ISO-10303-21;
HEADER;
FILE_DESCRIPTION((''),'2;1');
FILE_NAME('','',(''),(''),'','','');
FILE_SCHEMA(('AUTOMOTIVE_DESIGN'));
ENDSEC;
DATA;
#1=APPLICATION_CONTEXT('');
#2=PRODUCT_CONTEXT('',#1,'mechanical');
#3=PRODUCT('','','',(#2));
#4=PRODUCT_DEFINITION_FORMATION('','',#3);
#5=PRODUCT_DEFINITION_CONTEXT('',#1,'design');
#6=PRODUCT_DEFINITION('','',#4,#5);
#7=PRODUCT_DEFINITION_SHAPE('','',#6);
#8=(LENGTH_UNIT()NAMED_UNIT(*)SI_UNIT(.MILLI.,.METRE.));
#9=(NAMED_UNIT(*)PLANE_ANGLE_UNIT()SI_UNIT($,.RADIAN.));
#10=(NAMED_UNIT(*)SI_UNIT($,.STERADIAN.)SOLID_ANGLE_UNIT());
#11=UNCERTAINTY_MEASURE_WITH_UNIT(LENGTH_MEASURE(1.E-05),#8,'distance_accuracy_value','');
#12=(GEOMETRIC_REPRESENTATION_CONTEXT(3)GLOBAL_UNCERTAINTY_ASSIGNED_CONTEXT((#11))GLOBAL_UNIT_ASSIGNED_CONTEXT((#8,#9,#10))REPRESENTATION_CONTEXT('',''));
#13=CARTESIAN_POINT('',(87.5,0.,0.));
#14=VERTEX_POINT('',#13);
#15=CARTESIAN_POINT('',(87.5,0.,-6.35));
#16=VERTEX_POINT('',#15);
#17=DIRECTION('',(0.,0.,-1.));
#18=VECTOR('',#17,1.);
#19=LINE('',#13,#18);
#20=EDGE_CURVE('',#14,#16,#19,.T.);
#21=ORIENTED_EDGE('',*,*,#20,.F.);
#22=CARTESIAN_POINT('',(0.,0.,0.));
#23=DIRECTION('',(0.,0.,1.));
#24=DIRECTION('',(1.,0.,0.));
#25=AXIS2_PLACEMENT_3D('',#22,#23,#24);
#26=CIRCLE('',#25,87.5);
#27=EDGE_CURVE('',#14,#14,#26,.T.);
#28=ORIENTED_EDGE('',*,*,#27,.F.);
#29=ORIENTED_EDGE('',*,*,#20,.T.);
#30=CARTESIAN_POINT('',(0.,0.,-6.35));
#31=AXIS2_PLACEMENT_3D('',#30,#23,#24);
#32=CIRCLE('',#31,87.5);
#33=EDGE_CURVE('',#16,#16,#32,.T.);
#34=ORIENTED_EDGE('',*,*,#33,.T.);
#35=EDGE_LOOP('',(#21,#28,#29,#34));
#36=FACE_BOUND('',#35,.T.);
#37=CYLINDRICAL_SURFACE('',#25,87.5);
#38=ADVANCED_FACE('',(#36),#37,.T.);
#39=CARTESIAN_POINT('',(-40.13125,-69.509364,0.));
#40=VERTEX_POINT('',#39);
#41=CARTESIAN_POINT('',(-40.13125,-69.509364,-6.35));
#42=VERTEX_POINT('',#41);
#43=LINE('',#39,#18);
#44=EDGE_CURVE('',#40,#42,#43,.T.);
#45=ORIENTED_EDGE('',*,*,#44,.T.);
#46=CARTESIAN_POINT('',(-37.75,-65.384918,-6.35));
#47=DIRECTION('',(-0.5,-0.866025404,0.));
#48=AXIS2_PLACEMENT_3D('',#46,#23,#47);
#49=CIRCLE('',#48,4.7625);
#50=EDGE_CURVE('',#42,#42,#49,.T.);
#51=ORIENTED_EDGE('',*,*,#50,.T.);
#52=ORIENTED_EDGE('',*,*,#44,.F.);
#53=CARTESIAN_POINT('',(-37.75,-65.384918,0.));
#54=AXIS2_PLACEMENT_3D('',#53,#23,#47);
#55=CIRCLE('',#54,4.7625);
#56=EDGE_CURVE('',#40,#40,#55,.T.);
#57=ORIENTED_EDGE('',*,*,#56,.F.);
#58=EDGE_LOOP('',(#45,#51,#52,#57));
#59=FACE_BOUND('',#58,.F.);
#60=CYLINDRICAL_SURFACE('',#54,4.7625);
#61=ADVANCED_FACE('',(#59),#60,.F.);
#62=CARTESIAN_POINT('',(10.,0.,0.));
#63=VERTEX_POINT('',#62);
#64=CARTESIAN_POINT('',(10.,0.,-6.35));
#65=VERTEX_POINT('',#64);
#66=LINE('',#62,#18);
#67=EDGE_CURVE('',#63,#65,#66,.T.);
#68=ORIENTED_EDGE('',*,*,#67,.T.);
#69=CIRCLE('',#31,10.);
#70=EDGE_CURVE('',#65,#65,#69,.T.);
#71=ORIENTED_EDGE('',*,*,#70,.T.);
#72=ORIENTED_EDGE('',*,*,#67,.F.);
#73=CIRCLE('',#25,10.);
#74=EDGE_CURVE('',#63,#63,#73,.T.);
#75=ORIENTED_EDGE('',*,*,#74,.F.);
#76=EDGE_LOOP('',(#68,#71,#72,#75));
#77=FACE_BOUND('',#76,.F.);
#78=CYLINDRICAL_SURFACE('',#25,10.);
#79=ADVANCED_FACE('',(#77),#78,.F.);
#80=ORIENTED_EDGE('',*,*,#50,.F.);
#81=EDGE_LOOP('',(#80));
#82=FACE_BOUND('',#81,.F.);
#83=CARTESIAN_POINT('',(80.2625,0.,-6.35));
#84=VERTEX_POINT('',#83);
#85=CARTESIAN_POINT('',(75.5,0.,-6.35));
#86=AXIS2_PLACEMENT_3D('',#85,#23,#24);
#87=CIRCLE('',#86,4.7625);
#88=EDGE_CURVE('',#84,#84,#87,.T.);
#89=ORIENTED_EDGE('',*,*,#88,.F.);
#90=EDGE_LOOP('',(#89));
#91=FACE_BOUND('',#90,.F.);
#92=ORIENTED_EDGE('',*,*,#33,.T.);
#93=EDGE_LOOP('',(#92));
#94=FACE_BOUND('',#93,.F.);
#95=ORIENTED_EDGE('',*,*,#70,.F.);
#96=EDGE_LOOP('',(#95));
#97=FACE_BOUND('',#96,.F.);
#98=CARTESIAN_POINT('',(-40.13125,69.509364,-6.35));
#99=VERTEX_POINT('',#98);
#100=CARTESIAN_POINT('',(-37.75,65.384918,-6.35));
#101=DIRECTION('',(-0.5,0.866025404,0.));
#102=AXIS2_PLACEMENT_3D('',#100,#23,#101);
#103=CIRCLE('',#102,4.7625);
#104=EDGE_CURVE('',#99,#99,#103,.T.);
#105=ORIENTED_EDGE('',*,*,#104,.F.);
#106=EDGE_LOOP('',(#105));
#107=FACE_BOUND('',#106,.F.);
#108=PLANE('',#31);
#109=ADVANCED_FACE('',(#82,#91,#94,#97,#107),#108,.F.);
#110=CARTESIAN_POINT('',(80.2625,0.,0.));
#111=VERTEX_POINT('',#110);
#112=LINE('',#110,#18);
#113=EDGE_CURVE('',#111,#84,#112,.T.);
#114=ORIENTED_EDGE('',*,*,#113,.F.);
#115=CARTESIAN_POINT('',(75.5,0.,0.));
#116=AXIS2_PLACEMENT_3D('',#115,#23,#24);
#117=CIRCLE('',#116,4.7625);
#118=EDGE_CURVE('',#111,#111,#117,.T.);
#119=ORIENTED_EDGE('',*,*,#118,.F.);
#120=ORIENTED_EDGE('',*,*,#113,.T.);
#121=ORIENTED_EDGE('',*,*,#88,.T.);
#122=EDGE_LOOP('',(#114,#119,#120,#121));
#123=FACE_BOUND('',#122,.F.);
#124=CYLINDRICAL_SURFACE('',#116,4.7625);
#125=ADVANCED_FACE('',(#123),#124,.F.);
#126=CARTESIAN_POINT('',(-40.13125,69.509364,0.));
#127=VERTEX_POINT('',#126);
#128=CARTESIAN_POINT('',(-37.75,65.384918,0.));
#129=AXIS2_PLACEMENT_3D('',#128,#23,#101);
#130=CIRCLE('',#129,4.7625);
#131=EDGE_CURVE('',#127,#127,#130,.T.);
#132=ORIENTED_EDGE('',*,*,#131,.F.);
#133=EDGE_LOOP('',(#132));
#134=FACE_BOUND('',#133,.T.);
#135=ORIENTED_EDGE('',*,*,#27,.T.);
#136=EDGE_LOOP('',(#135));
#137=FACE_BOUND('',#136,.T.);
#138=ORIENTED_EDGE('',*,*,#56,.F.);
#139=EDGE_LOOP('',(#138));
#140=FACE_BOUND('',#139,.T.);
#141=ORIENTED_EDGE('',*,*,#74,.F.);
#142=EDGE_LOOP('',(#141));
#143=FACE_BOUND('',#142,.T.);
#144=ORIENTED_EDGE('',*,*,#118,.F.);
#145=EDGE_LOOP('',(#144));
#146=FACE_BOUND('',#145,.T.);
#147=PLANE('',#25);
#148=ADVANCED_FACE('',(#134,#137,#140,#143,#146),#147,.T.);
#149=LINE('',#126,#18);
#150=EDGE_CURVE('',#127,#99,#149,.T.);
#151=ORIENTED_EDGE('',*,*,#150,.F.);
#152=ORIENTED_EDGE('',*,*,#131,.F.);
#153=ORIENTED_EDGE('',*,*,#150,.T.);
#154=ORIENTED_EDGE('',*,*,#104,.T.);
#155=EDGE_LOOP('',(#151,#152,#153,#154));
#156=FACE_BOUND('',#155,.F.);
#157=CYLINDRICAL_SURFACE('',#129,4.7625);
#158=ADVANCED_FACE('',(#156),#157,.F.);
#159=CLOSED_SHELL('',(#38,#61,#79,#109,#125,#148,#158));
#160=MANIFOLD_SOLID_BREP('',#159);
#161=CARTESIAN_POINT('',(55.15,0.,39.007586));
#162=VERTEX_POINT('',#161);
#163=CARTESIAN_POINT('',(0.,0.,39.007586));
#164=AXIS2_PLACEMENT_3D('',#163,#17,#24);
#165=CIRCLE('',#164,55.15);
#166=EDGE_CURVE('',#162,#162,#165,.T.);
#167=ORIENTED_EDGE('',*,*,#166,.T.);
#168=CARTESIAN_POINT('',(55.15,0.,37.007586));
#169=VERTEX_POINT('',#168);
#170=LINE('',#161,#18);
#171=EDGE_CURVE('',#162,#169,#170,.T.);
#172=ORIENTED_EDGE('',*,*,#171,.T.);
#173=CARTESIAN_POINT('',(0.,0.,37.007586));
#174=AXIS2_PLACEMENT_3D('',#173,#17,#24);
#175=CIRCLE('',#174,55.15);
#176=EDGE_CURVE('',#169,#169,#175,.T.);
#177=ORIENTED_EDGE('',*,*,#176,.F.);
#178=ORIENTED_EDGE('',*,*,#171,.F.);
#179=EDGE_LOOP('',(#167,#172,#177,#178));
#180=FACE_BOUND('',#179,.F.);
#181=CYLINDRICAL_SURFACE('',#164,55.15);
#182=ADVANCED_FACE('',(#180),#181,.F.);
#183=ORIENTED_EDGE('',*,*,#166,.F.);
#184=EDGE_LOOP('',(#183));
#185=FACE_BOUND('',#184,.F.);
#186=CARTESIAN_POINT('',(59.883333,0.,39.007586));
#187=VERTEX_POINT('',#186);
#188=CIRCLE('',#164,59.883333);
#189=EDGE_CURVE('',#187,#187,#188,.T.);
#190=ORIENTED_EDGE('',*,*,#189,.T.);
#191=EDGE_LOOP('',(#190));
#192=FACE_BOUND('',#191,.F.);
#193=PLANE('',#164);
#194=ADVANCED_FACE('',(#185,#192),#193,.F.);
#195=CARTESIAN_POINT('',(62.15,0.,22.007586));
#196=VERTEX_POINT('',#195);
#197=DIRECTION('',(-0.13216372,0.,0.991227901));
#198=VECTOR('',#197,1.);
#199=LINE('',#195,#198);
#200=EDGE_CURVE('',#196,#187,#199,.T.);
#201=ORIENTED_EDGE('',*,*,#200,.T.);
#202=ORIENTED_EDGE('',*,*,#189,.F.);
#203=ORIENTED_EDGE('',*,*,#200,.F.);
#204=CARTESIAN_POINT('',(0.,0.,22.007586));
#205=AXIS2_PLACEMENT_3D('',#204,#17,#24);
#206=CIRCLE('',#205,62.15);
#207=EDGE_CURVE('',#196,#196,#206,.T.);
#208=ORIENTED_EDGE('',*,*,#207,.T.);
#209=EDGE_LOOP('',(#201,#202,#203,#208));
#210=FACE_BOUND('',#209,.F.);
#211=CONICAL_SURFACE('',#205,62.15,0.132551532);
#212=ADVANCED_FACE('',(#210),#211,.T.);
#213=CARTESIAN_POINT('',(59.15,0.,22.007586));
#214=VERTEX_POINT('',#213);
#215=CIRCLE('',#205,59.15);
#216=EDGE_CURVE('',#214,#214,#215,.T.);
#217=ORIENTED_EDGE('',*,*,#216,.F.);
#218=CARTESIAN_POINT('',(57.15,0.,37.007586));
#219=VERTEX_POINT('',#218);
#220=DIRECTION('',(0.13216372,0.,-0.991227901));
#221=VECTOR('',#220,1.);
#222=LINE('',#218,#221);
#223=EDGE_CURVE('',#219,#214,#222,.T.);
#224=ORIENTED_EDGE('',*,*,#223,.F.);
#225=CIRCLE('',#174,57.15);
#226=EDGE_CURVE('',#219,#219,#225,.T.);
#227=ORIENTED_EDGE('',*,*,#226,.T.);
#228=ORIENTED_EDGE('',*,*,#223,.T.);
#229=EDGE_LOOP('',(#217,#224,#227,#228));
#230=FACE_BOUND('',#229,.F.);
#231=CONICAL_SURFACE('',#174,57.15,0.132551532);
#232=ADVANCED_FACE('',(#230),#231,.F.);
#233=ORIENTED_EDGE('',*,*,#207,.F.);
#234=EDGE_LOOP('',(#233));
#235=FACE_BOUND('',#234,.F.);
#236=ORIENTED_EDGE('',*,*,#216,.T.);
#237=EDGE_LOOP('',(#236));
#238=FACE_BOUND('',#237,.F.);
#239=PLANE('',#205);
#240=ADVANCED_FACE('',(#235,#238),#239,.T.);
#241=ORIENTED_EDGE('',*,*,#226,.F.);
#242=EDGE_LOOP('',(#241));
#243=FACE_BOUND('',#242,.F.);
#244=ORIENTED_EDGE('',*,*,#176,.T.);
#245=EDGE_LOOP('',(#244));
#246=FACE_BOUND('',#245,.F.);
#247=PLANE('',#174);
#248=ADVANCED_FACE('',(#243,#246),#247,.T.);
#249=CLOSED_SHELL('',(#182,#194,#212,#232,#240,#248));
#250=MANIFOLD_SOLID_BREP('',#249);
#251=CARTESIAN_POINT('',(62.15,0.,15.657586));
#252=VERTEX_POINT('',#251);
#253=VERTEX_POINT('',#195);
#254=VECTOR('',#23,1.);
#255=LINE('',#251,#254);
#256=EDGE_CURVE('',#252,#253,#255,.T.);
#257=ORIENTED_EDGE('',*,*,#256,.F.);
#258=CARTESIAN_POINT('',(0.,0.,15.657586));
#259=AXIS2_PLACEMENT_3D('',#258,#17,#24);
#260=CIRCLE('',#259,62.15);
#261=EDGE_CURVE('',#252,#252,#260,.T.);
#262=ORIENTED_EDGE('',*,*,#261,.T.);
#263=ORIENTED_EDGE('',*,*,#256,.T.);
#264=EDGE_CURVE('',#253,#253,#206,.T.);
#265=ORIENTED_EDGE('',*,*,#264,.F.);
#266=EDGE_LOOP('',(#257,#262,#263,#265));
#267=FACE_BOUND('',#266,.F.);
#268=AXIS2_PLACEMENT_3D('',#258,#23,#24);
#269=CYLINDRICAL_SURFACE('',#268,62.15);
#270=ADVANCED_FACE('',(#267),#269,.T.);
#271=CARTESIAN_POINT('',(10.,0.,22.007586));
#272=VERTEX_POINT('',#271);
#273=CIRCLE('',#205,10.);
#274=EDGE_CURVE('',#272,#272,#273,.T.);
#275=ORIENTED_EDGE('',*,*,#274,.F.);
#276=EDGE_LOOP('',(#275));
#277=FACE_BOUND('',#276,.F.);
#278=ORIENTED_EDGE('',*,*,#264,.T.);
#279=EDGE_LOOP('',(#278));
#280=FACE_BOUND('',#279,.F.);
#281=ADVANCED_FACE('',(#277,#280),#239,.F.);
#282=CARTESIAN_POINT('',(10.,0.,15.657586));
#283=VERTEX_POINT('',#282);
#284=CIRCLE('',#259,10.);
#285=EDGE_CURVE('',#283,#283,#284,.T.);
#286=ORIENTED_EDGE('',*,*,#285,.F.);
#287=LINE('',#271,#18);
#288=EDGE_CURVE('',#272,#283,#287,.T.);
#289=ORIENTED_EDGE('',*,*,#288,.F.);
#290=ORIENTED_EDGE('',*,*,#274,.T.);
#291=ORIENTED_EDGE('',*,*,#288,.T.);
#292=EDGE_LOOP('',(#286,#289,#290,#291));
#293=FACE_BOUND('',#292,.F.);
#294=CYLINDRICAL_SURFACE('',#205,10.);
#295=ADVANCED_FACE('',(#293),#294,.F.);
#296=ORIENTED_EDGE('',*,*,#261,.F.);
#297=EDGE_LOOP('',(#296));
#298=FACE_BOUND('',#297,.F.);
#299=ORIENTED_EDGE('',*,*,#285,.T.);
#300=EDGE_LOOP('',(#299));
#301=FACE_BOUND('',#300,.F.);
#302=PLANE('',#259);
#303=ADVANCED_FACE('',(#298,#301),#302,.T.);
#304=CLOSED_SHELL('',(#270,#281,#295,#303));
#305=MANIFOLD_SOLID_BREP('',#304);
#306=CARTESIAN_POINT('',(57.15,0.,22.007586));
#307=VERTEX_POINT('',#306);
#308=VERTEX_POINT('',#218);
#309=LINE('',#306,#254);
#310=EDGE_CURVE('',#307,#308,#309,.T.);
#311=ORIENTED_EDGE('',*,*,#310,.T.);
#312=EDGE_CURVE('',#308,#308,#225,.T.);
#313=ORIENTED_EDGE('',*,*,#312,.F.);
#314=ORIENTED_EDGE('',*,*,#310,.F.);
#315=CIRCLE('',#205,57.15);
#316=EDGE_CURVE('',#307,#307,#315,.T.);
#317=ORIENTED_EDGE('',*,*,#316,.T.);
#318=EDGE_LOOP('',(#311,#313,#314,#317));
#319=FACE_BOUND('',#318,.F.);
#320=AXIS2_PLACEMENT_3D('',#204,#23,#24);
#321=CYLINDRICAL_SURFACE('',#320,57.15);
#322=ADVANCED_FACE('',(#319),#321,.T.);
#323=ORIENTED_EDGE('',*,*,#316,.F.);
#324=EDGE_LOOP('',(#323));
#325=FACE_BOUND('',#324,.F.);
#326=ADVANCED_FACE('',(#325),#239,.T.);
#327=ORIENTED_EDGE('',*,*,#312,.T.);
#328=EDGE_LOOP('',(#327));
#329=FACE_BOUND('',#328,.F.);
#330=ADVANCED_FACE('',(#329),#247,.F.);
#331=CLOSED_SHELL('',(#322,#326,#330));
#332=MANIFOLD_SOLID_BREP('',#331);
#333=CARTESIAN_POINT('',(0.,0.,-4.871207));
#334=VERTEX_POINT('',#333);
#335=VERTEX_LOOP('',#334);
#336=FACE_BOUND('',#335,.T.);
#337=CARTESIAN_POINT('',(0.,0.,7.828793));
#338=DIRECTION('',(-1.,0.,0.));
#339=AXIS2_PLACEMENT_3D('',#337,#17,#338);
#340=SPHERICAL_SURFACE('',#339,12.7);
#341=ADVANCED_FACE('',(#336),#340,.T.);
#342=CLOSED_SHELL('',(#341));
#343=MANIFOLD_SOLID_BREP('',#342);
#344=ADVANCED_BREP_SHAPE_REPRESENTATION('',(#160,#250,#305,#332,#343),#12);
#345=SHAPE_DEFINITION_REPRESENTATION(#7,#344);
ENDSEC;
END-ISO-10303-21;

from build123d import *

# Parameters (mm, degrees)
F0_R            = 87.5
F0_R_2          = 10
F0_R_3          = 4.7625
F1_DEPTH        = 6.35
F2_DEPTH        = 6.35
F2_COPIES_COUNT = 3


# Not quite as in the source:
# - a length typed as a fraction of an inch, garbled in the dataset ("3 / 203.2 mm" for 3/8 in), is restored
# - a pattern or mirror of a feature is missing from the dataset's text; its kind, count and spacing are read off the source's solid
# - a feature names something its author has since deleted; it is built from what else it names


with BuildPart() as f1:
    # F0 (on Top) → F1 (new body)
    with BuildSketch(Plane.XY):
        Circle(F0_R)
        Circle(F0_R_2, mode=Mode.SUBTRACT)
        with Locations((75.5, 0)):
            Circle(F0_R_3, mode=Mode.SUBTRACT)
        with Locations((75.5, 0)):
            Circle(F0_R_3)
    extrude(amount=-F1_DEPTH)

    # F0 (on Top) → F2 (cut, through all)
    with BuildSketch(Plane.XY):
        with Locations((75.5, 0)):
            Circle(F0_R_3)
    f2 = extrude(amount=-F2_DEPTH, mode=Mode.SUBTRACT)

    # F2_copies: F2 ×3 about axis
    f2_copies_axis = Axis((0, 0, 0), (0, 0, 1))
    for i in range(1, F2_COPIES_COUNT):
        add(f2.rotate(f2_copies_axis, i * 360 / F2_COPIES_COUNT), mode=Mode.SUBTRACT)


with BuildPart() as f4:
    # F3 (on Front) → F4 (revolve)
    with BuildSketch(Plane.XZ):
        with BuildLine():
            ThreePointArc((0, 20.5287930104), (-12.7, 7.8287930104), (0, -4.8712069896))
            Line((0, -4.8712069896), (0, 20.5287930104))
        make_face()
    revolve(axis=Axis((0, 0, 7.8287930104), (0, 0, -1)))


with BuildPart() as f5:
    # F3 (on Front) → F5 (revolve)
    with BuildSketch(Plane.XZ):
        Polygon((0, 22.0075860208), (10, 22.0075860208), (57.15, 22.0075860208), (57.15, 37.0075860208), (55.15, 37.0075860208), (0, 37.0075860208), align=None)
    revolve(axis=Axis((0, 0, 29.5075860208), (0, 0, -1)))


with BuildPart() as f6:
    # F3 (on Front) → F6 (revolve)
    with BuildSketch(Plane.XZ):
        Polygon((10, 22.0075860208), (10, 15.6575860208), (62.15, 15.6575860208), (62.15, 22.0075860208), (59.15, 22.0075860208), (57.15, 22.0075860208), align=None)
    revolve(axis=Axis((0, 0, 7.8287930104), (0, 0, -1)))


with BuildPart() as f7:
    # F3 (on Front) → F7 (revolve)
    with BuildSketch(Plane.XZ):
        Polygon((59.15, 22.0075860208), (62.15, 22.0075860208), (59.8833333333, 39.0075860208), (55.15, 39.0075860208), (55.15, 37.0075860208), (57.15, 37.0075860208), align=None)
    revolve(axis=Axis((0, 0, 29.5075860208), (0, 0, -1)))


solid = Compound([f1.part, f4.part, f5.part, f6.part, f7.part])
